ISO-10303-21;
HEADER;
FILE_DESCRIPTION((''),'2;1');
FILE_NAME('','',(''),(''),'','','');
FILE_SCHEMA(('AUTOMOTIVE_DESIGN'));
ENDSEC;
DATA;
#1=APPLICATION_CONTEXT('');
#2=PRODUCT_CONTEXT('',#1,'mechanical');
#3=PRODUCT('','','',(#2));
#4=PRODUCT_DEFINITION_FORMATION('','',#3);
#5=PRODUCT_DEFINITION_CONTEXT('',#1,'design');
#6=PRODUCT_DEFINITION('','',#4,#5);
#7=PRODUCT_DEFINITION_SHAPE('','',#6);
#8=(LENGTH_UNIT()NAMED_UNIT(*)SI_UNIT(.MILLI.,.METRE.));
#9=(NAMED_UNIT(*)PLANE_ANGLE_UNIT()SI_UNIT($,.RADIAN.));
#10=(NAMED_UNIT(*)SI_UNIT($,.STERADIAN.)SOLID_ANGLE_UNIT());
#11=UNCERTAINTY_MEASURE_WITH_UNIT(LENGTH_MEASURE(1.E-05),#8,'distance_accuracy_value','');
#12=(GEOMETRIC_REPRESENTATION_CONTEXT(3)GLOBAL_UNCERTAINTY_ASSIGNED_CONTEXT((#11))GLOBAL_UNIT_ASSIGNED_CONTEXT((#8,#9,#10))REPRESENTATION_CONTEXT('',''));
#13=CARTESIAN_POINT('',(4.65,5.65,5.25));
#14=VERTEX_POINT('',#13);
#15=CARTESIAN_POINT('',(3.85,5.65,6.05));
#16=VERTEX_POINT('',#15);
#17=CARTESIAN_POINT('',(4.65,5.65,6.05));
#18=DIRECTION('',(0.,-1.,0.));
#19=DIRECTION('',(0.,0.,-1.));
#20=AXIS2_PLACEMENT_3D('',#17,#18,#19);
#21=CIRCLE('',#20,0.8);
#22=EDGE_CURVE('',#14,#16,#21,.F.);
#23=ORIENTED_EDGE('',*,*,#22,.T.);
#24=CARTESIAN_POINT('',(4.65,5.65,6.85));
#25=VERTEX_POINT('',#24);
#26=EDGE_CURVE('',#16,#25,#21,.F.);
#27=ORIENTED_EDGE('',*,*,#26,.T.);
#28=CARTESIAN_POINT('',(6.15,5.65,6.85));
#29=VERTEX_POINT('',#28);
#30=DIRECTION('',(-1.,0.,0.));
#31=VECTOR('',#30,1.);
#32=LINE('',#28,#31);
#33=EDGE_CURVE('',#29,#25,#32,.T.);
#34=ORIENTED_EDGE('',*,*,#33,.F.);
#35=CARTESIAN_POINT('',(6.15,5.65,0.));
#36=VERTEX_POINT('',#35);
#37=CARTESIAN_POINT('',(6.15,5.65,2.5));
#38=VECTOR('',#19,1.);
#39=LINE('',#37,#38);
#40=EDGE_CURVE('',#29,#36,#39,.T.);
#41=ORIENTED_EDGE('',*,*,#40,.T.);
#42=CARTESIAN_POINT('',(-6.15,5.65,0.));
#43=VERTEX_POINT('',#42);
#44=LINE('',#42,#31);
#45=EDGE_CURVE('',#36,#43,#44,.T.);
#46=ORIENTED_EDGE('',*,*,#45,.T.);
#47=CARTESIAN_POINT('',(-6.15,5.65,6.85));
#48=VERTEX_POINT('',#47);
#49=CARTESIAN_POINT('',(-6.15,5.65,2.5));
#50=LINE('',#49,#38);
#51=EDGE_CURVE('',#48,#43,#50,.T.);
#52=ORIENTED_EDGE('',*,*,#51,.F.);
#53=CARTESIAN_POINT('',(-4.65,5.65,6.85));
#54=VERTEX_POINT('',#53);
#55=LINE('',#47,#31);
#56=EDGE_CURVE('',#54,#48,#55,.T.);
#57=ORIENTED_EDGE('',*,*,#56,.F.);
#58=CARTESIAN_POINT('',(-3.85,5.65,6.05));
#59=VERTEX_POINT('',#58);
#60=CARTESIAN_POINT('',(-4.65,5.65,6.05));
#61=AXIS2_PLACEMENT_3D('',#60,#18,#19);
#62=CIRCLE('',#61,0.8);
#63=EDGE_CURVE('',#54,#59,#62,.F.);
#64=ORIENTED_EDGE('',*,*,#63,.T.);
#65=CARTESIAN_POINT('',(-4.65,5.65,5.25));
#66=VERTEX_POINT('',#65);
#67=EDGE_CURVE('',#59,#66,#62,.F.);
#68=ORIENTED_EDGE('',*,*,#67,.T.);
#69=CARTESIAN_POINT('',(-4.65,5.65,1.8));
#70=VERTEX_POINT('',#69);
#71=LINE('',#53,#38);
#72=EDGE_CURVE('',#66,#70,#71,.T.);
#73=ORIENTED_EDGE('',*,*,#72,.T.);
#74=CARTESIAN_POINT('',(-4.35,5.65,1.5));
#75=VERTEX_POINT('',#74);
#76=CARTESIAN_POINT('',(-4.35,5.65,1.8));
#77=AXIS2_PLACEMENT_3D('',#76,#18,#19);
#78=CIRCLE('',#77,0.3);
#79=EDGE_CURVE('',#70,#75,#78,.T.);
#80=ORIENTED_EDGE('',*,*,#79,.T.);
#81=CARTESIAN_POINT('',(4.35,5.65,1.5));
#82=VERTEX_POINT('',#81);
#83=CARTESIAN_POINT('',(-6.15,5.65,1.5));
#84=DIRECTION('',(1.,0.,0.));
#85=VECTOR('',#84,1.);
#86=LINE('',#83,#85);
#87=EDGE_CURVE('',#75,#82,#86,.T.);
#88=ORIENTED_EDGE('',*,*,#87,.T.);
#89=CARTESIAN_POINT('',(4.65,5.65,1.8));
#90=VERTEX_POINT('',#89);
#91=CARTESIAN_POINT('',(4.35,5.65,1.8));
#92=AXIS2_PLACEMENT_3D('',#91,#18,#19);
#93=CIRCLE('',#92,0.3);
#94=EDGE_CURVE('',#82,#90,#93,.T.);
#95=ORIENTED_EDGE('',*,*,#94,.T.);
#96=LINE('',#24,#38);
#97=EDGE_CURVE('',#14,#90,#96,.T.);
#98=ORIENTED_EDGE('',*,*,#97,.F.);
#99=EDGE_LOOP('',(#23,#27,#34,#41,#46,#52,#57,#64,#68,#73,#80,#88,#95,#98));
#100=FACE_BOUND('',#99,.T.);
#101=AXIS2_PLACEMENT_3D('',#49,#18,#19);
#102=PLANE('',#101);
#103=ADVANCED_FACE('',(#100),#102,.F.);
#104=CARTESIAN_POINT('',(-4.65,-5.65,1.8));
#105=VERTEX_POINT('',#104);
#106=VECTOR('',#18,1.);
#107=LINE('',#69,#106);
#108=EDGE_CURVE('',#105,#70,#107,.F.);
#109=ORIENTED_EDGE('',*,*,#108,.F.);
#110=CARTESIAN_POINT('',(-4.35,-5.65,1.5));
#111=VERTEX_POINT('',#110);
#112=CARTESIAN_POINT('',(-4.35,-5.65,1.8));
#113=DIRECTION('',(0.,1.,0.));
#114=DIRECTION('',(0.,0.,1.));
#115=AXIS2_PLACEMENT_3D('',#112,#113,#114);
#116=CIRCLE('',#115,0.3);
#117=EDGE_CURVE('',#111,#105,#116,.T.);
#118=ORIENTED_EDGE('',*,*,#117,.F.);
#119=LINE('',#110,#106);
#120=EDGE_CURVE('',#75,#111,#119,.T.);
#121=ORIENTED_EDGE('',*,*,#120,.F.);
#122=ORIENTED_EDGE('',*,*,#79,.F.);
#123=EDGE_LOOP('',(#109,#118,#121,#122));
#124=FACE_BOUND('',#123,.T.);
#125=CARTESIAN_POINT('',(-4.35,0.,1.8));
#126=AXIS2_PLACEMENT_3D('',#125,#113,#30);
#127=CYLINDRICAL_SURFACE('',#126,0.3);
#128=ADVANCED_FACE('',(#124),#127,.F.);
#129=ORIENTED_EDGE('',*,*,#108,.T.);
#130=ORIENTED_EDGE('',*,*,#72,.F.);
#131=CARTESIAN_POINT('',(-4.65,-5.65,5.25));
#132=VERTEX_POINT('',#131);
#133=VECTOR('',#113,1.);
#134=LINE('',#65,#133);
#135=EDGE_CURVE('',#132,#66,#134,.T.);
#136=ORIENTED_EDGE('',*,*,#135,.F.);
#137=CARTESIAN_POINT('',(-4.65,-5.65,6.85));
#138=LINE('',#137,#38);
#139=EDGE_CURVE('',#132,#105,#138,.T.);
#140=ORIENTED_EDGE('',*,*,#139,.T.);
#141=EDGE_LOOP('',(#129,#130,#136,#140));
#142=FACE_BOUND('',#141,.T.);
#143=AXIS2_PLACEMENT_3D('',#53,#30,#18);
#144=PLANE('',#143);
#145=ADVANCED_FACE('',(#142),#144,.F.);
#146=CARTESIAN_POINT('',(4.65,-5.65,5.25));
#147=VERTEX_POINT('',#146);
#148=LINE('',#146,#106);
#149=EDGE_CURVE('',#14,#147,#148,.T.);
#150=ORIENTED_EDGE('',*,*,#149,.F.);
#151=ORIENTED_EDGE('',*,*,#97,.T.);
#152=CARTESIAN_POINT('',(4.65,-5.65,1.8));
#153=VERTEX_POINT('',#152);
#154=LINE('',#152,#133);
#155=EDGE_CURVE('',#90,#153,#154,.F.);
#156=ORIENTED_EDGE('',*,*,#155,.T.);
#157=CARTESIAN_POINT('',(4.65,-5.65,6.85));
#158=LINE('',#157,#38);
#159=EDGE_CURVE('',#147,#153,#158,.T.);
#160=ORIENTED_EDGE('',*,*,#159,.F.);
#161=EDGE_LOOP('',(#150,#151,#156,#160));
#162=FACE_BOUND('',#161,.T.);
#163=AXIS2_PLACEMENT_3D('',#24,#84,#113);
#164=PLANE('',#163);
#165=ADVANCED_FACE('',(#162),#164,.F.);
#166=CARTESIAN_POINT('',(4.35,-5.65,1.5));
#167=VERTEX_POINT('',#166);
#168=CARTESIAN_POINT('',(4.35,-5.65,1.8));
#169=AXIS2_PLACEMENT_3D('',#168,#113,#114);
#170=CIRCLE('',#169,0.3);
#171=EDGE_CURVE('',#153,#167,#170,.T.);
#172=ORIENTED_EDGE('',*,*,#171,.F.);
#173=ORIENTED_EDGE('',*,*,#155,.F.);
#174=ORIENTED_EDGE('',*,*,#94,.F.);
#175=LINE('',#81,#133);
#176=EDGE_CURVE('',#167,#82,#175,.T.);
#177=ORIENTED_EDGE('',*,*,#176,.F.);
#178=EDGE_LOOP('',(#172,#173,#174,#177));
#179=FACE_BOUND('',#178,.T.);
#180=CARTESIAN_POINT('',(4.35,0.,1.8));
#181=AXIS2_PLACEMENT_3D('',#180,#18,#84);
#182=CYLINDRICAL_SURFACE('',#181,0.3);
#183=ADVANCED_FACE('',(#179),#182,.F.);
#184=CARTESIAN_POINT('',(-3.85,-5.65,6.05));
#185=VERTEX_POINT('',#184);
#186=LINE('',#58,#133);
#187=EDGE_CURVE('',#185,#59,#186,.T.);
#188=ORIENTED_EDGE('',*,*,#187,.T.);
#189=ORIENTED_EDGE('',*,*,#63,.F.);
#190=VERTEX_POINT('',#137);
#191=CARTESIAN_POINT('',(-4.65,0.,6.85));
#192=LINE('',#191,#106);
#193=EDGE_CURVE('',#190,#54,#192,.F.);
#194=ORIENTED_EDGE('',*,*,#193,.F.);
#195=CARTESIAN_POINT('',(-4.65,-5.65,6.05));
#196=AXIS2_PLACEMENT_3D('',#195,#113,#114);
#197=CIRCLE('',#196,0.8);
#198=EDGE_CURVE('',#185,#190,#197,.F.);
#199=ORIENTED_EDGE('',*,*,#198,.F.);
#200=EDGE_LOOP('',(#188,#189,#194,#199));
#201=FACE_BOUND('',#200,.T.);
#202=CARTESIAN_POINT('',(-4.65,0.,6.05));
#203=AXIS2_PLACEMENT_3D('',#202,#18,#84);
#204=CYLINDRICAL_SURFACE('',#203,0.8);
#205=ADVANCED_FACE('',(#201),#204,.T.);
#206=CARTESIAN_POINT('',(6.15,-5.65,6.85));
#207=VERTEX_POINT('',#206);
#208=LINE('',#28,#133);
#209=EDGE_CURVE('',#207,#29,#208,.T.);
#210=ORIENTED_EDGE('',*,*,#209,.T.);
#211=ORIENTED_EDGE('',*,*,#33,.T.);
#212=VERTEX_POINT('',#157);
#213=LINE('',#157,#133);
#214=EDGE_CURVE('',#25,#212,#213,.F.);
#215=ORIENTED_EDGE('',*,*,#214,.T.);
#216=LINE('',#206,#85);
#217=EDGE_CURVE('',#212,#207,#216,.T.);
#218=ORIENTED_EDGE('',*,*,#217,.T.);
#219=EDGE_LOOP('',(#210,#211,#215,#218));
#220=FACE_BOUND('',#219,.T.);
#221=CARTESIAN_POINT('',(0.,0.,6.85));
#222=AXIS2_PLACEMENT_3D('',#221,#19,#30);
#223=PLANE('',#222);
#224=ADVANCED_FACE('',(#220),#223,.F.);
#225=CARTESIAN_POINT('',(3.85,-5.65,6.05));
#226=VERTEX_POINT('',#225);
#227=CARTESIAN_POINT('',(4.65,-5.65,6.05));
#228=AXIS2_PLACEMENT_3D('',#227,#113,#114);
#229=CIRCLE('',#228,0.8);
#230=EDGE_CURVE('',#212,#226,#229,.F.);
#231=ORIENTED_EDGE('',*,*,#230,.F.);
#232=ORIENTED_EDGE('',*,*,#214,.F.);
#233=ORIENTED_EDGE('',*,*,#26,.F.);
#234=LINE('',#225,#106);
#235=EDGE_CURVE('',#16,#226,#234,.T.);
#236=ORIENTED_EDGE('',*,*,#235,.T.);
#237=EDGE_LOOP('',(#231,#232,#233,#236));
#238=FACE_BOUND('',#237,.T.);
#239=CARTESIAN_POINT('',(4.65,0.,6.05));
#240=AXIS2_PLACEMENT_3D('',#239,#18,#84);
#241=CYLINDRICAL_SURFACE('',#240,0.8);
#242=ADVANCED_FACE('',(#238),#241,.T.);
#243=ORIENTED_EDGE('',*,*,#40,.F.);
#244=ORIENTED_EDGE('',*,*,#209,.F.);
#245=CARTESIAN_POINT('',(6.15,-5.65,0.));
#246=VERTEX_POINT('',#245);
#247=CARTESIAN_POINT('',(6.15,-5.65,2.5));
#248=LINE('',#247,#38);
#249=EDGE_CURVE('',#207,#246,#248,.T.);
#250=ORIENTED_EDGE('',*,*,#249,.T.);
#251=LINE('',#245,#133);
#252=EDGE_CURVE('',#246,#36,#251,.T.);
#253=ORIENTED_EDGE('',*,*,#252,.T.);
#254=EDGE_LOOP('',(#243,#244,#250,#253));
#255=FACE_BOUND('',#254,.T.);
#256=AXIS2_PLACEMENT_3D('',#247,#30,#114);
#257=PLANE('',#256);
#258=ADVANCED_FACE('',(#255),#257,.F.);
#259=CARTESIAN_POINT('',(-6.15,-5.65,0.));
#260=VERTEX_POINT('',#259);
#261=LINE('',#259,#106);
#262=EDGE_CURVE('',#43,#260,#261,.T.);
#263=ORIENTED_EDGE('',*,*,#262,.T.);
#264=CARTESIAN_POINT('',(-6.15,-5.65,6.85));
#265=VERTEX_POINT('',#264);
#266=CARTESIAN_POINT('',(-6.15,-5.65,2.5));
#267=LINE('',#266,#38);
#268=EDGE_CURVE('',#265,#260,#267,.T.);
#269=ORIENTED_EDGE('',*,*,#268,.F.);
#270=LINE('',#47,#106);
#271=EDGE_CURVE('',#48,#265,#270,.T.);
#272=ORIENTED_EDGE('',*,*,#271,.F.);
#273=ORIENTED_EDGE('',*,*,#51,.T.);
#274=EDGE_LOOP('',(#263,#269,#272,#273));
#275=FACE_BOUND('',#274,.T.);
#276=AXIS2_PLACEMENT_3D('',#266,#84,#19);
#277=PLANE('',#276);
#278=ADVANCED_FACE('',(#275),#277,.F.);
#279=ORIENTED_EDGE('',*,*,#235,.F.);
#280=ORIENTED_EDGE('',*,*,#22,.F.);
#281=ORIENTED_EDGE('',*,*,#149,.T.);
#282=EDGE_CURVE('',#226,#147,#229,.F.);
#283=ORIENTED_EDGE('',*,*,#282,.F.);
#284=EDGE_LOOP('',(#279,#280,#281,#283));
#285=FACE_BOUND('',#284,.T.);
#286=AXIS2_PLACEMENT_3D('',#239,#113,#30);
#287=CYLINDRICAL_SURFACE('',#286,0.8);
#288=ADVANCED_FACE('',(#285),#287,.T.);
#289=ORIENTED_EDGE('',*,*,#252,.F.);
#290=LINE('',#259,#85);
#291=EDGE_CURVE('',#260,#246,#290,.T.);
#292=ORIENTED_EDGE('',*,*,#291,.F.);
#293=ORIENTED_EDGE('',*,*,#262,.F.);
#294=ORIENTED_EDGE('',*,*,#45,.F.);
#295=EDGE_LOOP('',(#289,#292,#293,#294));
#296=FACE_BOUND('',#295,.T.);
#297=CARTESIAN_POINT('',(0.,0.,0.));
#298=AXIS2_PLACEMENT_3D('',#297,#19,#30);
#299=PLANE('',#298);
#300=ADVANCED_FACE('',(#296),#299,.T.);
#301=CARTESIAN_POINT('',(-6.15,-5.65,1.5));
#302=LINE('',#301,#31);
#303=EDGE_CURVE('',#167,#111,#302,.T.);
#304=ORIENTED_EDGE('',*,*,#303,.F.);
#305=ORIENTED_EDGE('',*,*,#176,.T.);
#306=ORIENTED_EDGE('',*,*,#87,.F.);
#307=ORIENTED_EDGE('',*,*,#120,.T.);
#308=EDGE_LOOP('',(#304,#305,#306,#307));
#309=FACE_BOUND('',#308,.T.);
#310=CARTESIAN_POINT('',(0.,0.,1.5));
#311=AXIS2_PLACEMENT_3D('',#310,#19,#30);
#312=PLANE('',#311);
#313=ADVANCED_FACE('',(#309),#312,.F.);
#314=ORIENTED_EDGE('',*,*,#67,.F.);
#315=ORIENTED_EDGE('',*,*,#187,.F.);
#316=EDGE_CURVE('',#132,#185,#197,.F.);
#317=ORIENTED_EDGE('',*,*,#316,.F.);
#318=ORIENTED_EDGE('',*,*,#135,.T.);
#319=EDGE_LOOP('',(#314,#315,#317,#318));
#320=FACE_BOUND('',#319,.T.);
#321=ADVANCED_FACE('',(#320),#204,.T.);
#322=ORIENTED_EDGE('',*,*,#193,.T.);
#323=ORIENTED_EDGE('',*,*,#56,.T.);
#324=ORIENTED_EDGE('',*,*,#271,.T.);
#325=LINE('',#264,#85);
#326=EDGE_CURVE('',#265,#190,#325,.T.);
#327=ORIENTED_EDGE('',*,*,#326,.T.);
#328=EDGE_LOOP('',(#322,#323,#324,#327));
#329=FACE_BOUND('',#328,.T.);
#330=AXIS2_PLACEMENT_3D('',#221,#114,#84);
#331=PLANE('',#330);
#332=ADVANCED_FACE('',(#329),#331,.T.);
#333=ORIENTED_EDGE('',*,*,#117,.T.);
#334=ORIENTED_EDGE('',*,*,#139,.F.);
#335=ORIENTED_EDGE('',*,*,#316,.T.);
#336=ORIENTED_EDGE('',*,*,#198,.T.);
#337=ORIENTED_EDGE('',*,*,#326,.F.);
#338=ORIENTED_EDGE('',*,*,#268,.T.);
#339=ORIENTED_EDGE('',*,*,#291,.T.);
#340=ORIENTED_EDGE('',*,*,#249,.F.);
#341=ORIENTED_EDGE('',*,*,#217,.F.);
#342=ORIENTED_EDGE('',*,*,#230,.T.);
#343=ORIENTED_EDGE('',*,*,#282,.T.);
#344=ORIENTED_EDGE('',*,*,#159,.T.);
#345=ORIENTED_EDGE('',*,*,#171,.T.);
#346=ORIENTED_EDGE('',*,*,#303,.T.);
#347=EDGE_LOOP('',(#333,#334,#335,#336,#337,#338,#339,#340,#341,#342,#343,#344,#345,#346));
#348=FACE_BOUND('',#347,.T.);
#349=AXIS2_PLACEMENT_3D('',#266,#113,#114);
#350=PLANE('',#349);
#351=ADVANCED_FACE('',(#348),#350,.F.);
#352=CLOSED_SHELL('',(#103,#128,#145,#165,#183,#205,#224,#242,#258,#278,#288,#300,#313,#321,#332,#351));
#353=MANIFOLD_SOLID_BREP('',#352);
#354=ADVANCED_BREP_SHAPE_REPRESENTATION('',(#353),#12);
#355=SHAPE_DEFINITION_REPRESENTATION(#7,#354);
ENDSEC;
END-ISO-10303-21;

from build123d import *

# Parameters (mm, degrees)
SKETCH_1_W          = 12.3
SKETCH_1_H          = 11.3
EXTRUDE_1_DEPTH     = 2.5
SKETCH_2_W          = 1.5
SKETCH_2_H          = 11.3
EXTRUDE_2_DEPTH     = 4.35
SKETCH_5_W          = 9.3
SKETCH_5_H          = 11.5
CUT_EXTRUDE_1_DEPTH = 1
SKETCH_8_W          = 1.6
SKETCH_8_H          = 11.3
EXTRUDE_5_DEPTH     = 0.8
SKETCH_9_W          = 1.6
SKETCH_9_H          = 11.3
EXTRUDE_6_DEPTH     = 0.8
FILLET_7_R          = 0.8
FILLET_8_R          = 0.3


with BuildPart() as part:
    # 스케치1 → 보스-돌출1 (new body)
    with BuildSketch(Plane.XY):
        Rectangle(SKETCH_1_W, SKETCH_1_H)
    extrude(amount=EXTRUDE_1_DEPTH)

    # 스케치2 → 보스-돌출2 (add)
    with BuildSketch(Plane.XY.offset(2.5)):
        with Locations((-5.4, 0)):
            Rectangle(SKETCH_2_W, SKETCH_2_H)
        with Locations((5.4, 0)):
            Rectangle(SKETCH_2_W, SKETCH_2_H)
    extrude(amount=EXTRUDE_2_DEPTH)

    # 스케치5 → 컷-돌출1 (cut)
    with BuildSketch(Plane.XY.offset(2.5)):
        Rectangle(SKETCH_5_W, SKETCH_5_H)
    extrude(amount=-CUT_EXTRUDE_1_DEPTH, mode=Mode.SUBTRACT)

    # 스케치8 → 보스-돌출5 (add)
    with BuildSketch(Plane(origin=(-4.65, 0, 0), x_dir=(0, 0, -1), z_dir=(1, 0, 0))):
        with Locations((-6.05, 0)):
            Rectangle(SKETCH_8_W, SKETCH_8_H)
    extrude(amount=EXTRUDE_5_DEPTH)

    # 스케치9 → 보스-돌출6 (add)
    with BuildSketch(Plane.ZY.offset(-4.65)):
        with Locations((6.05, 0)):
            Rectangle(SKETCH_9_W, SKETCH_9_H)
    extrude(amount=EXTRUDE_6_DEPTH)

    # 필렛7
    fillet_7_edges = [part.edges().sort_by_distance(p)[0] for p in [
        (3.85, 0, 6.85),
        (-3.85, 0, 6.85),
        (3.85, 0, 5.25),
        (-3.85, 0, 5.25),
    ]]
    fillet(fillet_7_edges, radius=FILLET_7_R - 0.0001)  # a hair under: the kernel refuses the full size

    # 필렛8
    fillet_8_edges = [part.edges().sort_by_distance(p)[0] for p in [
        (4.65, 0, 1.5),
        (-4.65, 0, 1.5),
    ]]
    fillet(fillet_8_edges, radius=FILLET_8_R)


solid = part.part
